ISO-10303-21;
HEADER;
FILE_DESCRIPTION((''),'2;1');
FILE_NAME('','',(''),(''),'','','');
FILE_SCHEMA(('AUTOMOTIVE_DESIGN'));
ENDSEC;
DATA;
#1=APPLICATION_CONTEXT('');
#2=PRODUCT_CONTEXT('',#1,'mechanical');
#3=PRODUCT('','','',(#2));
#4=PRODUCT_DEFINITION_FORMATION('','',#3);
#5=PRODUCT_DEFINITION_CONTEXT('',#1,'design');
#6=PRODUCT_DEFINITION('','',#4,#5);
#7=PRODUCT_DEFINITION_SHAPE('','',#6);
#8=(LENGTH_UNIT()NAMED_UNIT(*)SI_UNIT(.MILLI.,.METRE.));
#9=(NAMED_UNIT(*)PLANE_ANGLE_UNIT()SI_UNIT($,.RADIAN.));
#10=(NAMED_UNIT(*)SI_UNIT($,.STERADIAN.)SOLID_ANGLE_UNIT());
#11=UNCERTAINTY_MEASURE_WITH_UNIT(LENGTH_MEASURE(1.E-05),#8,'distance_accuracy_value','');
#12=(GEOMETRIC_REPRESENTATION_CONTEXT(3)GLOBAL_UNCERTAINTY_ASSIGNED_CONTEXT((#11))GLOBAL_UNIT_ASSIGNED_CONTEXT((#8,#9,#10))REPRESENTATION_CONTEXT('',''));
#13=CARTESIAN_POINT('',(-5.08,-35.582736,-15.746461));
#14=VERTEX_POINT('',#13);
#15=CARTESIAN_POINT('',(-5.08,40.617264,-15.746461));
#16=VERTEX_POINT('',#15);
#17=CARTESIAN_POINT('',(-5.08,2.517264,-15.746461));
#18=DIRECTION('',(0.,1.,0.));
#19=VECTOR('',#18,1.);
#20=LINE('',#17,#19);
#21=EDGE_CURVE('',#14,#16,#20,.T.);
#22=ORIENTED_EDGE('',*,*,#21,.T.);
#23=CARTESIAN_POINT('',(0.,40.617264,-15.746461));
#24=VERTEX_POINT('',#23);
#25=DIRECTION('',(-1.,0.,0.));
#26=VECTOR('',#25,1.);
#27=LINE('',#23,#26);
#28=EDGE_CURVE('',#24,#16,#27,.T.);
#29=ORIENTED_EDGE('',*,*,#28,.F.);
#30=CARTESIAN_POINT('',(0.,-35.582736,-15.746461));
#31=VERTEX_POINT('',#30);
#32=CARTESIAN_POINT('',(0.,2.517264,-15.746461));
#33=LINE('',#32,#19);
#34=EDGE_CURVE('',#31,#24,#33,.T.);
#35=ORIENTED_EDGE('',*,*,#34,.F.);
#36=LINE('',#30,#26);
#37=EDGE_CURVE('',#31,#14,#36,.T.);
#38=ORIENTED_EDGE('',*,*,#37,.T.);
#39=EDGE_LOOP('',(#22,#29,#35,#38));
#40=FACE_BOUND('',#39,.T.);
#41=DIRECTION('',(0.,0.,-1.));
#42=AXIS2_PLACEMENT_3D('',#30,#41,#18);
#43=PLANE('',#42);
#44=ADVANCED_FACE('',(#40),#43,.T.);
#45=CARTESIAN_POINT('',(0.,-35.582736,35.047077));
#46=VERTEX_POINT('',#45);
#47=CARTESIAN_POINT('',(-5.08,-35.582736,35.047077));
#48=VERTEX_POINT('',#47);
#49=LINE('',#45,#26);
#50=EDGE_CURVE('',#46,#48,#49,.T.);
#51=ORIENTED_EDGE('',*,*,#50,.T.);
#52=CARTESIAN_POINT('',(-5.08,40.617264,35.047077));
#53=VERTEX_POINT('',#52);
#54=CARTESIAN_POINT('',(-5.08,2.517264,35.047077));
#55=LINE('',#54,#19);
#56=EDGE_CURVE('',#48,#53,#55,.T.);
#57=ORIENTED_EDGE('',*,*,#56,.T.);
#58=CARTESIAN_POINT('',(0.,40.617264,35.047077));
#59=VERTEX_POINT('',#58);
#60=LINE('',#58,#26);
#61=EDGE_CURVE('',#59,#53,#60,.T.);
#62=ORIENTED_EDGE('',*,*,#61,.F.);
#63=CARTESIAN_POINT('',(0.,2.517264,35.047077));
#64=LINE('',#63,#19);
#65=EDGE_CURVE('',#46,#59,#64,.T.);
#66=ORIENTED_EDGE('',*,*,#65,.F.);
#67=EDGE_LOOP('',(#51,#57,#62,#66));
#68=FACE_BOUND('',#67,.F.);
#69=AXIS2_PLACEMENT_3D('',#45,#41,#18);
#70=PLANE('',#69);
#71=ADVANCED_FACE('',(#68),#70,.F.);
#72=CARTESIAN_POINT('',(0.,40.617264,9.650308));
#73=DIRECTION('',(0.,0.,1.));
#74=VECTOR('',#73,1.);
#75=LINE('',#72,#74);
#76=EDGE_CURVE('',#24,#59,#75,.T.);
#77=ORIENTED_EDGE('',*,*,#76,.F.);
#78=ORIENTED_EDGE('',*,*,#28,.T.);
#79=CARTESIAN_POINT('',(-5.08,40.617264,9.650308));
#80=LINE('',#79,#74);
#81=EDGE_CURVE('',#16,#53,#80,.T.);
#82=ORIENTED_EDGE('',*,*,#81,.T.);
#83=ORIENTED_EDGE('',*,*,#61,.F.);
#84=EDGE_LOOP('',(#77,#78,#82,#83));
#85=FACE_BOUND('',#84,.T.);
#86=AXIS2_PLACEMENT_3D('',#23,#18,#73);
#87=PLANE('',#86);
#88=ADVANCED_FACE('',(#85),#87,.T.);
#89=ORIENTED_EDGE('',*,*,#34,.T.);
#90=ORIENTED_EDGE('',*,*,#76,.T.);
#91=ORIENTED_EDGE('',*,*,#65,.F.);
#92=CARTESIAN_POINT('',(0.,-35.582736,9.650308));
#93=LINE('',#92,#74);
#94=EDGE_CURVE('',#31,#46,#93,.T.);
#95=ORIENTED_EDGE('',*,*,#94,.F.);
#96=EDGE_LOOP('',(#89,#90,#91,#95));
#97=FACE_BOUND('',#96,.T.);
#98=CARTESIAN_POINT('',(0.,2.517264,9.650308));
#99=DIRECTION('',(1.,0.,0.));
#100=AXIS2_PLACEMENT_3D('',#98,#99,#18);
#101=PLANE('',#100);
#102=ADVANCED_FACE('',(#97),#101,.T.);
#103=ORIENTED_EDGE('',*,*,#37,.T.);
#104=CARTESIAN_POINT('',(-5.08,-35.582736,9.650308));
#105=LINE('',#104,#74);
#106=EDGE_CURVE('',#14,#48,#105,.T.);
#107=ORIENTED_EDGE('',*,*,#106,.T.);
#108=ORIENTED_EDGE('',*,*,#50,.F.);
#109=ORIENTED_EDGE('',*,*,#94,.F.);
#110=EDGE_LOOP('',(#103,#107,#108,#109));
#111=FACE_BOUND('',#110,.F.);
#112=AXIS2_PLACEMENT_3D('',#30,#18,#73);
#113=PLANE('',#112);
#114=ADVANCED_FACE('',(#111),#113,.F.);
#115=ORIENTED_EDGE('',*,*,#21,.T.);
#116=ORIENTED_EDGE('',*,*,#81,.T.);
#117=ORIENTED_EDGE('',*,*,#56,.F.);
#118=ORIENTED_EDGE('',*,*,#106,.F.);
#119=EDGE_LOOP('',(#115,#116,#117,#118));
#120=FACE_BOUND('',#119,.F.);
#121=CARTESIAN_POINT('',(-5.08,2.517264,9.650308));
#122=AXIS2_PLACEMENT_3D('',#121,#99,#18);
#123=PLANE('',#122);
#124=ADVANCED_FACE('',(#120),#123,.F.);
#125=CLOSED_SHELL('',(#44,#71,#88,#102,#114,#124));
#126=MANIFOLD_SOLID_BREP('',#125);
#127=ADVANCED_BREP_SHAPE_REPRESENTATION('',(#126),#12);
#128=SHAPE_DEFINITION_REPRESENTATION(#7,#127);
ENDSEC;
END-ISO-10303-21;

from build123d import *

# Parameters (mm, degrees)
F0_W     = 76.2
F0_H     = 50.79353787
F3_DEPTH = 5.08


# Not quite as in the source:
# - the program builds the solid bodies; features that only make, move or delete a surface that nothing else refers to are left out


with BuildPart() as f3:
    # F0 (on Right) → F3 (new body)
    with BuildSketch(Plane.YZ):
        with Locations((2.5172638655, 9.6503077075)):
            Rectangle(F0_W, F0_H)
    extrude(amount=-F3_DEPTH)


solid = f3.part
